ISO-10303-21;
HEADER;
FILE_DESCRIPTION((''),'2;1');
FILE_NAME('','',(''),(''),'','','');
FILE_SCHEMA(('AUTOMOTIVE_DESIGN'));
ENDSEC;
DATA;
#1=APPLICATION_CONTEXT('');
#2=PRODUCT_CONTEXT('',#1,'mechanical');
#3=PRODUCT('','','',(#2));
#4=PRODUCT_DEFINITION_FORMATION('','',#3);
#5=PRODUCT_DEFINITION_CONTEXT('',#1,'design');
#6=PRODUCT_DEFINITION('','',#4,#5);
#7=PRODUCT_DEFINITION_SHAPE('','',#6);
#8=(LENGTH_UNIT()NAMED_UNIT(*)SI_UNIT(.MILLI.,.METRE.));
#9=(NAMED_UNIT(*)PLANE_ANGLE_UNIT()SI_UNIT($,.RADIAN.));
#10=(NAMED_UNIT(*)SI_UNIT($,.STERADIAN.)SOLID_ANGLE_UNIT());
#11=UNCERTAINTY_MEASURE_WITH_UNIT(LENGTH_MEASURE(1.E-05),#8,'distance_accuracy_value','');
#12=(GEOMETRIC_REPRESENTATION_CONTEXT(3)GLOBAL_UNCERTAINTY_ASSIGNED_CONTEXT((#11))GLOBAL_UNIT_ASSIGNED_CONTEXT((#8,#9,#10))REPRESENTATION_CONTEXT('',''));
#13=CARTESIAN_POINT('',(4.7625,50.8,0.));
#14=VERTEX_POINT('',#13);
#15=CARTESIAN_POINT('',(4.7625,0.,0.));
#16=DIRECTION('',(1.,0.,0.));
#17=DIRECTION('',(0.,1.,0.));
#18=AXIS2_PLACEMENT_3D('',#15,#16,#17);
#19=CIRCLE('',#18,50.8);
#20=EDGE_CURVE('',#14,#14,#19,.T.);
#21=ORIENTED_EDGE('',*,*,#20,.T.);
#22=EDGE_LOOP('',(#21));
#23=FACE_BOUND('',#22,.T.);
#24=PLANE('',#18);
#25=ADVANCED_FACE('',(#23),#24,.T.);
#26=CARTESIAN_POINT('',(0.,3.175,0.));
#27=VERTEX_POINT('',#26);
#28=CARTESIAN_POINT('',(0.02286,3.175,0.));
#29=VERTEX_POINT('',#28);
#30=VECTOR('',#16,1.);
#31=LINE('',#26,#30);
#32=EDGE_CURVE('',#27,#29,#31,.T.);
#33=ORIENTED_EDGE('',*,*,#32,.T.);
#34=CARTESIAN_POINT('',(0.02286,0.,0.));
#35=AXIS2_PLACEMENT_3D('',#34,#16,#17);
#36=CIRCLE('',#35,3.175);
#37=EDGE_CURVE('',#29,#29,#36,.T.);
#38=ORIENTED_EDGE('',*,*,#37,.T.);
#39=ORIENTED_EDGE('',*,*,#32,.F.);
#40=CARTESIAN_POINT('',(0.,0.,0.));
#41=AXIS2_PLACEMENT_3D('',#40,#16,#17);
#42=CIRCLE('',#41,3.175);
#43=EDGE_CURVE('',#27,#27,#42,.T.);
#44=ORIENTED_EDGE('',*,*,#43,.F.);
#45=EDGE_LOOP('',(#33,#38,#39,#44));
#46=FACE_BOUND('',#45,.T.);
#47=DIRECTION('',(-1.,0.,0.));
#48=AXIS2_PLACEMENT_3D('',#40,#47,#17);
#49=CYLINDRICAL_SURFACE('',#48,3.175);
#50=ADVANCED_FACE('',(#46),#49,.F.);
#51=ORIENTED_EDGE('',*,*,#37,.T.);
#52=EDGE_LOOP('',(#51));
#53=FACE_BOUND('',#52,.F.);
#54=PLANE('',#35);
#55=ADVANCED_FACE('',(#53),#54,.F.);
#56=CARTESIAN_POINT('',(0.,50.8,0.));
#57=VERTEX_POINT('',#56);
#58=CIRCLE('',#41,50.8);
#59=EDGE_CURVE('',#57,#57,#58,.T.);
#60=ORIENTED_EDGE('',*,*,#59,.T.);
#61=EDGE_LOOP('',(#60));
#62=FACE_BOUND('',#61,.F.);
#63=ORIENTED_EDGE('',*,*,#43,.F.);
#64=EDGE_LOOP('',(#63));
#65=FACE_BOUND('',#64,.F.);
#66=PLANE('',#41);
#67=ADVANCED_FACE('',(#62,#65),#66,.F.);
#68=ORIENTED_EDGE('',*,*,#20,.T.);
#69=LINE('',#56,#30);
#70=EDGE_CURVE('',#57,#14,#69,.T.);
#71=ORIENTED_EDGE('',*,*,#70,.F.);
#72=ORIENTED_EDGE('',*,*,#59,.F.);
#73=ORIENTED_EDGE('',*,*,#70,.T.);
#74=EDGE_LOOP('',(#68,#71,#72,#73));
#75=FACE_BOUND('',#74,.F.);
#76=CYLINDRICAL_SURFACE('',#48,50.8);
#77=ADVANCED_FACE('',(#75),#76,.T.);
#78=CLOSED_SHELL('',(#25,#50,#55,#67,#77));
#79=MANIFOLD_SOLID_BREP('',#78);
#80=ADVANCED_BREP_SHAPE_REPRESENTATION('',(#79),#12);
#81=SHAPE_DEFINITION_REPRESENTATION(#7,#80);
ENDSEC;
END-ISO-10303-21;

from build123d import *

# Parameters (mm, degrees)
F0_R     = 50.8
F1_DEPTH = 4.7625
F2_R     = 3.175
F3_DEPTH = 0.02286


# Not quite as in the source:
# - a length typed as a fraction of an inch, garbled in the dataset ("3 / 203.2 mm" for 3/8 in), is restored


with BuildPart() as f1:
    # F0 (on Right) → F1 (new body)
    with BuildSketch(Plane.YZ):
        Circle(F0_R)
    extrude(amount=F1_DEPTH)

    # F2 (on Right) → F3 (cut)
    with BuildSketch(Plane.YZ):
        Circle(F2_R)
    extrude(amount=F3_DEPTH, mode=Mode.SUBTRACT)


solid = f1.part
